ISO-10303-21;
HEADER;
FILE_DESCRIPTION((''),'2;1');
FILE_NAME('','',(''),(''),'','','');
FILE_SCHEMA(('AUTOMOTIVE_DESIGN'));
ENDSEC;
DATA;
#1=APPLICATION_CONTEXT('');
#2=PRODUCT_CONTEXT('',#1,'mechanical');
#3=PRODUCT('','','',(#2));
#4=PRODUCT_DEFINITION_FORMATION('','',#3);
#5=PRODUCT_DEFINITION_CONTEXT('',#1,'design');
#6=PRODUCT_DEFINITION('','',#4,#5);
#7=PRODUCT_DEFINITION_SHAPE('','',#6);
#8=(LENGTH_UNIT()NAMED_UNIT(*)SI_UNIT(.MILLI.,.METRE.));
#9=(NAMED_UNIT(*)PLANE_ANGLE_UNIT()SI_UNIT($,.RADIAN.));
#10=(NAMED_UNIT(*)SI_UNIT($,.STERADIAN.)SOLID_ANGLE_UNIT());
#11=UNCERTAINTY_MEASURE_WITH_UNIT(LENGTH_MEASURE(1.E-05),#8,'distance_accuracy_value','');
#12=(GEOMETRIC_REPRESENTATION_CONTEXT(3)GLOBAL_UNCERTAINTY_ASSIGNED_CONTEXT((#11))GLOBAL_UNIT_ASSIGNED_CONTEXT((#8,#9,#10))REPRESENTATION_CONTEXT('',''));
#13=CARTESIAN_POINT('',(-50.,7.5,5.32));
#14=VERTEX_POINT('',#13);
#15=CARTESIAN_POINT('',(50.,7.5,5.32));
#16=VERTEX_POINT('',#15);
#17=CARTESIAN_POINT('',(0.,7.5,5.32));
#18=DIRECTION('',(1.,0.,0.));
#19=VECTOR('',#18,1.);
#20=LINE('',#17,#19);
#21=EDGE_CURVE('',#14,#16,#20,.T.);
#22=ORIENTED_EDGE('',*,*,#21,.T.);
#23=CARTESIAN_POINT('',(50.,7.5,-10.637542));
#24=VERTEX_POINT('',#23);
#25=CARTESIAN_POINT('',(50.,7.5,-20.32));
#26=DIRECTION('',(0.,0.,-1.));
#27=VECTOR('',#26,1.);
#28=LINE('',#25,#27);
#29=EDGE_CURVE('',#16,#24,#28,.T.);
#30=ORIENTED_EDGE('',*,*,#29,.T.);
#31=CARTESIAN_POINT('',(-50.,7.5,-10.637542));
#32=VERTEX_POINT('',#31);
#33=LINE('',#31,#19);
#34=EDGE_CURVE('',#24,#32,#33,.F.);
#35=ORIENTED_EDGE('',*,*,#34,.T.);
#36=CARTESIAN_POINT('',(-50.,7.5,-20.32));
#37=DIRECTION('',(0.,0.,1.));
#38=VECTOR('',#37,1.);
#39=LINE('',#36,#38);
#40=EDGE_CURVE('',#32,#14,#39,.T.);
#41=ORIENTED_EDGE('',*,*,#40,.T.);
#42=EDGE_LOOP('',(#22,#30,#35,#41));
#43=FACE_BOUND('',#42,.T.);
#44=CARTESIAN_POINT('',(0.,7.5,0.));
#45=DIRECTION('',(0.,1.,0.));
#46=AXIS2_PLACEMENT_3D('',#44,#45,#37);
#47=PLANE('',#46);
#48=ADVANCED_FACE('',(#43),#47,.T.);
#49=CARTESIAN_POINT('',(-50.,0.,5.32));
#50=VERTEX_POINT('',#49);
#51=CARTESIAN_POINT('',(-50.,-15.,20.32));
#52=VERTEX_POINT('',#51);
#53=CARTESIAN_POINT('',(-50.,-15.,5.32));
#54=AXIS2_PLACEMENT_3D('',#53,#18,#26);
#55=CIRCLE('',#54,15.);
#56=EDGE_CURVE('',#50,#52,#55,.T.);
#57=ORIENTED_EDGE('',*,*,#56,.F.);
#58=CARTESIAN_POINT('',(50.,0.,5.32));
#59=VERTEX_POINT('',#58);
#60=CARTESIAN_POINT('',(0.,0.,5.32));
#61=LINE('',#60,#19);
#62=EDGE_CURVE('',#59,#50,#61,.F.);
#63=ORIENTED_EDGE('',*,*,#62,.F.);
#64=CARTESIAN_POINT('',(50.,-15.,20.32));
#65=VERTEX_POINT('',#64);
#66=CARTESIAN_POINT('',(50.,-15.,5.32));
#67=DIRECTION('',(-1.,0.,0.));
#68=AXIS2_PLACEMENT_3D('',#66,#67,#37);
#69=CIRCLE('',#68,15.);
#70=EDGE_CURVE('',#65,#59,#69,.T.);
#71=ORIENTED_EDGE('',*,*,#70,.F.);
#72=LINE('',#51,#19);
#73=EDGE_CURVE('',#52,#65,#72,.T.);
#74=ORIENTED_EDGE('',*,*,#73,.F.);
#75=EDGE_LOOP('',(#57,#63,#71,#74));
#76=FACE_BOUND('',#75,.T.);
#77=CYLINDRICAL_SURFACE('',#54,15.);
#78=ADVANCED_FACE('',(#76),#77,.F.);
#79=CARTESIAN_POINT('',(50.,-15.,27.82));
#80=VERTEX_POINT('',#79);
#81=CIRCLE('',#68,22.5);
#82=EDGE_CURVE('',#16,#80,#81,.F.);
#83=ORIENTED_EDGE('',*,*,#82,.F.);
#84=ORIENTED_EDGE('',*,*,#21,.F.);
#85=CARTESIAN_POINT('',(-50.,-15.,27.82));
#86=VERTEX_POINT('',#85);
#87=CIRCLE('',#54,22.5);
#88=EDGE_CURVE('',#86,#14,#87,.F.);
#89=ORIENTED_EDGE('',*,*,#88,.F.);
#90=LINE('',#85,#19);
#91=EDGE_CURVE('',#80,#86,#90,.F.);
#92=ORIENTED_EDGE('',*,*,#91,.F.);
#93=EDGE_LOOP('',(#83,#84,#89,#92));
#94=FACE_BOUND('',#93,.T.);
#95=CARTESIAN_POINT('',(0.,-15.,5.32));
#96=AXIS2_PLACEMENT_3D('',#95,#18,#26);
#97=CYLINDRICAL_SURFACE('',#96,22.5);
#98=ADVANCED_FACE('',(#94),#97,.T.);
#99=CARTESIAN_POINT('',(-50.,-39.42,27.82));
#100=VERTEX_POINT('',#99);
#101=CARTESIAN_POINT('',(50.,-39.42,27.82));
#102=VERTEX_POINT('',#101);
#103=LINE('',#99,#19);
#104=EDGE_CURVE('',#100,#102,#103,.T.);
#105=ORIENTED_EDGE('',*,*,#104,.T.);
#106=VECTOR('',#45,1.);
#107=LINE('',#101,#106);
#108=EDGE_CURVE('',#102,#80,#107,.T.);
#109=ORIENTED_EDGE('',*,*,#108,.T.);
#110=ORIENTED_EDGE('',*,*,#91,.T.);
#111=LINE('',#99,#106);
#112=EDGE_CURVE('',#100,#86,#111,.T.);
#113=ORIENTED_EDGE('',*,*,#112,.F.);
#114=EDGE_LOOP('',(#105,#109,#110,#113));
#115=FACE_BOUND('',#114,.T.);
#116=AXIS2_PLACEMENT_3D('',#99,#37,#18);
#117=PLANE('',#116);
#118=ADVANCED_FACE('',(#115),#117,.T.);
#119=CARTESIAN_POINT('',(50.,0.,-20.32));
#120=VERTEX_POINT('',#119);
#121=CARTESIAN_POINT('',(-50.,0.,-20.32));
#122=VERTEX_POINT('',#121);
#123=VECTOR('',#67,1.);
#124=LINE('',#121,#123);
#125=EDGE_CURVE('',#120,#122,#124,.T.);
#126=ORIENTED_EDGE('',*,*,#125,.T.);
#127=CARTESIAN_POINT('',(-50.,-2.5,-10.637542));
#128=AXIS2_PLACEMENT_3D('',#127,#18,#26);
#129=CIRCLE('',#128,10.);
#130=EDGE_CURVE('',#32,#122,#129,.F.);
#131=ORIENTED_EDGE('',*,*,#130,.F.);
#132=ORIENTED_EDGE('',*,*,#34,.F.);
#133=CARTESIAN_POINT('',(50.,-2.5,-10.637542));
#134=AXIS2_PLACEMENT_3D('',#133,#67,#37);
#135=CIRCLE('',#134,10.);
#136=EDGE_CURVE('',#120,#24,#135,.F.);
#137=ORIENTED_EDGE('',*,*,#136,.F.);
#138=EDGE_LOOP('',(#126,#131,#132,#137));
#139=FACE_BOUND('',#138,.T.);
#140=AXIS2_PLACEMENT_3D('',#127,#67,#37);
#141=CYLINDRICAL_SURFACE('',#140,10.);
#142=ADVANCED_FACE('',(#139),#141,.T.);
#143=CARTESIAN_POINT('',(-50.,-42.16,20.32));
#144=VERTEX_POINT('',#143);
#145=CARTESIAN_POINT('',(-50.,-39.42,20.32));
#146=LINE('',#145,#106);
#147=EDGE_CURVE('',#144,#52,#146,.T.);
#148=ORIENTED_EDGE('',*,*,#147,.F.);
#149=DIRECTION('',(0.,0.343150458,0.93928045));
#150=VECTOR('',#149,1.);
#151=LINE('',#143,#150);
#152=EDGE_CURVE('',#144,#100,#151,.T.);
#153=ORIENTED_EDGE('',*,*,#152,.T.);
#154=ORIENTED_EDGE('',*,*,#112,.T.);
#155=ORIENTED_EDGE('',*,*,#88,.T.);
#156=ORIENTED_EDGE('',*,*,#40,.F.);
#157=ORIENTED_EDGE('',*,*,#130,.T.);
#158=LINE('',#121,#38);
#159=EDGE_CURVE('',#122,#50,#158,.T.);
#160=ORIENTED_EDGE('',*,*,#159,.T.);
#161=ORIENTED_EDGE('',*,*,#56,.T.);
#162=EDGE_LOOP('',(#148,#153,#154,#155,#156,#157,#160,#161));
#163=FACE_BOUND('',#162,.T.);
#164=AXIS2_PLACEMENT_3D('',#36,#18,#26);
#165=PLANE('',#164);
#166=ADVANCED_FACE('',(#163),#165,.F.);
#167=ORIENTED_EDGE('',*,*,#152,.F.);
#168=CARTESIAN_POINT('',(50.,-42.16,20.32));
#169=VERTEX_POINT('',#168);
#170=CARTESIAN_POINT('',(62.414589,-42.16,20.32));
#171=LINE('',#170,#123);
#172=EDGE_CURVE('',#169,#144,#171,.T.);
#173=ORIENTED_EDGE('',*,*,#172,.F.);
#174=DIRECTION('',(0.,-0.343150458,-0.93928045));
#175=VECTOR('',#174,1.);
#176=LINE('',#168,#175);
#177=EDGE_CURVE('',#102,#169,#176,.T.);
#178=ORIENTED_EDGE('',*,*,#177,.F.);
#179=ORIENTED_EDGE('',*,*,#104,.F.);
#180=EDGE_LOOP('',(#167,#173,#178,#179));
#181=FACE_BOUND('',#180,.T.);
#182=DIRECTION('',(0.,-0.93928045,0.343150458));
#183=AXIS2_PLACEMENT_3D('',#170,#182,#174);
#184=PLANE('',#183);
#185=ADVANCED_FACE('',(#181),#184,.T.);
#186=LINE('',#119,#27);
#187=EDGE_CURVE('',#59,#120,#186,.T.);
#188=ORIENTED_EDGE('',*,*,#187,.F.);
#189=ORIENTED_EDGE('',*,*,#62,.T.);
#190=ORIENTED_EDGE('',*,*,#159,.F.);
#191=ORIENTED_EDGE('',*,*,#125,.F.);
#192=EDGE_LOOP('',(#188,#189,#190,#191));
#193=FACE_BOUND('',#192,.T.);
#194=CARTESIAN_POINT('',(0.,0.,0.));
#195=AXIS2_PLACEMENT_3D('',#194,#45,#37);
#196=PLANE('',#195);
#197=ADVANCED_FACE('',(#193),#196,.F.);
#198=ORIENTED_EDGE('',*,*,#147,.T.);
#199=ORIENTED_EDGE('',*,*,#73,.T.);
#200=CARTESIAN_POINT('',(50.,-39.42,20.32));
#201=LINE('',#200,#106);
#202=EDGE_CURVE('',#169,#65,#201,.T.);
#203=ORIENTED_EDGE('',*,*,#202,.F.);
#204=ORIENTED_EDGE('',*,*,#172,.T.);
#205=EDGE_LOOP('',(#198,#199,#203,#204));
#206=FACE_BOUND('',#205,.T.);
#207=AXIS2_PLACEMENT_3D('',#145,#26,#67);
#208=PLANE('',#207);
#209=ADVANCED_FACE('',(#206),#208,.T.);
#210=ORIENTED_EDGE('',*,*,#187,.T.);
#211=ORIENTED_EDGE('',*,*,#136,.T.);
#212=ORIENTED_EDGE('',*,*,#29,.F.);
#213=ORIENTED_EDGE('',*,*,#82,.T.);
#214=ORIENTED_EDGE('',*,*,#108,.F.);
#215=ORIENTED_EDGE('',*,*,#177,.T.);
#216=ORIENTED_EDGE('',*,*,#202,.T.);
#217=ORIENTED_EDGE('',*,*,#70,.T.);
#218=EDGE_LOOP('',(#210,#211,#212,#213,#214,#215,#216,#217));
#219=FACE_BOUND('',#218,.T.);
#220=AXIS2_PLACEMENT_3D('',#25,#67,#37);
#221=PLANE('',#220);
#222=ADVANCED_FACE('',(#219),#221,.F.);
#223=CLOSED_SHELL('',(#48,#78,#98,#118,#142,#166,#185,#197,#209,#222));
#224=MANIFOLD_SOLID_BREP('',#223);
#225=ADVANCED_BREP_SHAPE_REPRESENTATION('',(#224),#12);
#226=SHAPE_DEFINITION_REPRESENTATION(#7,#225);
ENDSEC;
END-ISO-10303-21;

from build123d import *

# Parameters (mm, degrees)
SKETCH1_W           = 100
SKETCH1_H           = 40.64
BOSS_EXTRUDE1_DEPTH = 7.5
SKETCH2_W           = 100
SKETCH2_H           = 7.5
BOSS_EXTRUDE2_DEPTH = 46.92
BOSS_EXTRUDE3_DEPTH = 100
FILLET1_R           = 10
FILLET2_R           = 15
FILLET3_R           = 22.5


with BuildPart() as part:
    # Sketch1 → Boss-Extrude1 (new body)
    with BuildSketch(Plane(origin=(0, 0, 0), x_dir=(1, 0, 0), z_dir=(0, 1, 0))):
        Rectangle(SKETCH1_W, SKETCH1_H)
    extrude(amount=BOSS_EXTRUDE1_DEPTH)

    # Sketch2 → Boss-Extrude2 (add)
    with BuildSketch(Plane(origin=(0, 7.5, 0), x_dir=(1, 0, 0), z_dir=(0, 1, 0))):
        with Locations((0, -24.07)):
            Rectangle(SKETCH2_W, SKETCH2_H)
    extrude(amount=-BOSS_EXTRUDE2_DEPTH)

    # Sketch3 → Boss-Extrude3 (add)
    with BuildSketch(Plane.ZY.offset(50)):
        Polygon((20.32, -39.42), (20.32, -42.16), (27.82, -39.42), (27.82, -32.266971567), (20.32, -32.266971567), align=None)
    extrude(amount=-BOSS_EXTRUDE3_DEPTH)

    # Fillet1
    # the kernel refuses this fillet: 10 mm, written as the material it takes off along each edge
    with BuildSketch(Plane(origin=(-74.206145914, 7.5, -20.32), x_dir=(0, -1, 0), z_dir=(1, 0, 0))) as fillet1_piece_1:
        with BuildLine():
            CenterArc((10, -9.682458366), FILLET1_R, 104.477512186, 75.522487814)
            Line((0, -9.682458366), (-0.2, -9.682458366))
            Line((-0.2, -9.682458366), (-0.2, 0))
            Line((-0.2, 0), (0, 0.2))
            ThreePointArc((0, 0.2), (3.75, 0.2), (7.45, 0.193649167))
            Line((7.45, 0.193649167), (7.5, 0))
        make_face()
    extrude(amount=148.412291828, mode=Mode.SUBTRACT)

    # Fillet2
    fillet2_edges = [part.edges().sort_by_distance(p)[0] for p in [
        (0, 0, 20.32),
    ]]
    fillet(fillet2_edges, radius=FILLET2_R)

    # Fillet3
    fillet3_edges = [part.edges().sort_by_distance(p)[0] for p in [
        (0, 7.5, 27.82),
    ]]
    fillet(fillet3_edges, radius=FILLET3_R)


solid = part.part
